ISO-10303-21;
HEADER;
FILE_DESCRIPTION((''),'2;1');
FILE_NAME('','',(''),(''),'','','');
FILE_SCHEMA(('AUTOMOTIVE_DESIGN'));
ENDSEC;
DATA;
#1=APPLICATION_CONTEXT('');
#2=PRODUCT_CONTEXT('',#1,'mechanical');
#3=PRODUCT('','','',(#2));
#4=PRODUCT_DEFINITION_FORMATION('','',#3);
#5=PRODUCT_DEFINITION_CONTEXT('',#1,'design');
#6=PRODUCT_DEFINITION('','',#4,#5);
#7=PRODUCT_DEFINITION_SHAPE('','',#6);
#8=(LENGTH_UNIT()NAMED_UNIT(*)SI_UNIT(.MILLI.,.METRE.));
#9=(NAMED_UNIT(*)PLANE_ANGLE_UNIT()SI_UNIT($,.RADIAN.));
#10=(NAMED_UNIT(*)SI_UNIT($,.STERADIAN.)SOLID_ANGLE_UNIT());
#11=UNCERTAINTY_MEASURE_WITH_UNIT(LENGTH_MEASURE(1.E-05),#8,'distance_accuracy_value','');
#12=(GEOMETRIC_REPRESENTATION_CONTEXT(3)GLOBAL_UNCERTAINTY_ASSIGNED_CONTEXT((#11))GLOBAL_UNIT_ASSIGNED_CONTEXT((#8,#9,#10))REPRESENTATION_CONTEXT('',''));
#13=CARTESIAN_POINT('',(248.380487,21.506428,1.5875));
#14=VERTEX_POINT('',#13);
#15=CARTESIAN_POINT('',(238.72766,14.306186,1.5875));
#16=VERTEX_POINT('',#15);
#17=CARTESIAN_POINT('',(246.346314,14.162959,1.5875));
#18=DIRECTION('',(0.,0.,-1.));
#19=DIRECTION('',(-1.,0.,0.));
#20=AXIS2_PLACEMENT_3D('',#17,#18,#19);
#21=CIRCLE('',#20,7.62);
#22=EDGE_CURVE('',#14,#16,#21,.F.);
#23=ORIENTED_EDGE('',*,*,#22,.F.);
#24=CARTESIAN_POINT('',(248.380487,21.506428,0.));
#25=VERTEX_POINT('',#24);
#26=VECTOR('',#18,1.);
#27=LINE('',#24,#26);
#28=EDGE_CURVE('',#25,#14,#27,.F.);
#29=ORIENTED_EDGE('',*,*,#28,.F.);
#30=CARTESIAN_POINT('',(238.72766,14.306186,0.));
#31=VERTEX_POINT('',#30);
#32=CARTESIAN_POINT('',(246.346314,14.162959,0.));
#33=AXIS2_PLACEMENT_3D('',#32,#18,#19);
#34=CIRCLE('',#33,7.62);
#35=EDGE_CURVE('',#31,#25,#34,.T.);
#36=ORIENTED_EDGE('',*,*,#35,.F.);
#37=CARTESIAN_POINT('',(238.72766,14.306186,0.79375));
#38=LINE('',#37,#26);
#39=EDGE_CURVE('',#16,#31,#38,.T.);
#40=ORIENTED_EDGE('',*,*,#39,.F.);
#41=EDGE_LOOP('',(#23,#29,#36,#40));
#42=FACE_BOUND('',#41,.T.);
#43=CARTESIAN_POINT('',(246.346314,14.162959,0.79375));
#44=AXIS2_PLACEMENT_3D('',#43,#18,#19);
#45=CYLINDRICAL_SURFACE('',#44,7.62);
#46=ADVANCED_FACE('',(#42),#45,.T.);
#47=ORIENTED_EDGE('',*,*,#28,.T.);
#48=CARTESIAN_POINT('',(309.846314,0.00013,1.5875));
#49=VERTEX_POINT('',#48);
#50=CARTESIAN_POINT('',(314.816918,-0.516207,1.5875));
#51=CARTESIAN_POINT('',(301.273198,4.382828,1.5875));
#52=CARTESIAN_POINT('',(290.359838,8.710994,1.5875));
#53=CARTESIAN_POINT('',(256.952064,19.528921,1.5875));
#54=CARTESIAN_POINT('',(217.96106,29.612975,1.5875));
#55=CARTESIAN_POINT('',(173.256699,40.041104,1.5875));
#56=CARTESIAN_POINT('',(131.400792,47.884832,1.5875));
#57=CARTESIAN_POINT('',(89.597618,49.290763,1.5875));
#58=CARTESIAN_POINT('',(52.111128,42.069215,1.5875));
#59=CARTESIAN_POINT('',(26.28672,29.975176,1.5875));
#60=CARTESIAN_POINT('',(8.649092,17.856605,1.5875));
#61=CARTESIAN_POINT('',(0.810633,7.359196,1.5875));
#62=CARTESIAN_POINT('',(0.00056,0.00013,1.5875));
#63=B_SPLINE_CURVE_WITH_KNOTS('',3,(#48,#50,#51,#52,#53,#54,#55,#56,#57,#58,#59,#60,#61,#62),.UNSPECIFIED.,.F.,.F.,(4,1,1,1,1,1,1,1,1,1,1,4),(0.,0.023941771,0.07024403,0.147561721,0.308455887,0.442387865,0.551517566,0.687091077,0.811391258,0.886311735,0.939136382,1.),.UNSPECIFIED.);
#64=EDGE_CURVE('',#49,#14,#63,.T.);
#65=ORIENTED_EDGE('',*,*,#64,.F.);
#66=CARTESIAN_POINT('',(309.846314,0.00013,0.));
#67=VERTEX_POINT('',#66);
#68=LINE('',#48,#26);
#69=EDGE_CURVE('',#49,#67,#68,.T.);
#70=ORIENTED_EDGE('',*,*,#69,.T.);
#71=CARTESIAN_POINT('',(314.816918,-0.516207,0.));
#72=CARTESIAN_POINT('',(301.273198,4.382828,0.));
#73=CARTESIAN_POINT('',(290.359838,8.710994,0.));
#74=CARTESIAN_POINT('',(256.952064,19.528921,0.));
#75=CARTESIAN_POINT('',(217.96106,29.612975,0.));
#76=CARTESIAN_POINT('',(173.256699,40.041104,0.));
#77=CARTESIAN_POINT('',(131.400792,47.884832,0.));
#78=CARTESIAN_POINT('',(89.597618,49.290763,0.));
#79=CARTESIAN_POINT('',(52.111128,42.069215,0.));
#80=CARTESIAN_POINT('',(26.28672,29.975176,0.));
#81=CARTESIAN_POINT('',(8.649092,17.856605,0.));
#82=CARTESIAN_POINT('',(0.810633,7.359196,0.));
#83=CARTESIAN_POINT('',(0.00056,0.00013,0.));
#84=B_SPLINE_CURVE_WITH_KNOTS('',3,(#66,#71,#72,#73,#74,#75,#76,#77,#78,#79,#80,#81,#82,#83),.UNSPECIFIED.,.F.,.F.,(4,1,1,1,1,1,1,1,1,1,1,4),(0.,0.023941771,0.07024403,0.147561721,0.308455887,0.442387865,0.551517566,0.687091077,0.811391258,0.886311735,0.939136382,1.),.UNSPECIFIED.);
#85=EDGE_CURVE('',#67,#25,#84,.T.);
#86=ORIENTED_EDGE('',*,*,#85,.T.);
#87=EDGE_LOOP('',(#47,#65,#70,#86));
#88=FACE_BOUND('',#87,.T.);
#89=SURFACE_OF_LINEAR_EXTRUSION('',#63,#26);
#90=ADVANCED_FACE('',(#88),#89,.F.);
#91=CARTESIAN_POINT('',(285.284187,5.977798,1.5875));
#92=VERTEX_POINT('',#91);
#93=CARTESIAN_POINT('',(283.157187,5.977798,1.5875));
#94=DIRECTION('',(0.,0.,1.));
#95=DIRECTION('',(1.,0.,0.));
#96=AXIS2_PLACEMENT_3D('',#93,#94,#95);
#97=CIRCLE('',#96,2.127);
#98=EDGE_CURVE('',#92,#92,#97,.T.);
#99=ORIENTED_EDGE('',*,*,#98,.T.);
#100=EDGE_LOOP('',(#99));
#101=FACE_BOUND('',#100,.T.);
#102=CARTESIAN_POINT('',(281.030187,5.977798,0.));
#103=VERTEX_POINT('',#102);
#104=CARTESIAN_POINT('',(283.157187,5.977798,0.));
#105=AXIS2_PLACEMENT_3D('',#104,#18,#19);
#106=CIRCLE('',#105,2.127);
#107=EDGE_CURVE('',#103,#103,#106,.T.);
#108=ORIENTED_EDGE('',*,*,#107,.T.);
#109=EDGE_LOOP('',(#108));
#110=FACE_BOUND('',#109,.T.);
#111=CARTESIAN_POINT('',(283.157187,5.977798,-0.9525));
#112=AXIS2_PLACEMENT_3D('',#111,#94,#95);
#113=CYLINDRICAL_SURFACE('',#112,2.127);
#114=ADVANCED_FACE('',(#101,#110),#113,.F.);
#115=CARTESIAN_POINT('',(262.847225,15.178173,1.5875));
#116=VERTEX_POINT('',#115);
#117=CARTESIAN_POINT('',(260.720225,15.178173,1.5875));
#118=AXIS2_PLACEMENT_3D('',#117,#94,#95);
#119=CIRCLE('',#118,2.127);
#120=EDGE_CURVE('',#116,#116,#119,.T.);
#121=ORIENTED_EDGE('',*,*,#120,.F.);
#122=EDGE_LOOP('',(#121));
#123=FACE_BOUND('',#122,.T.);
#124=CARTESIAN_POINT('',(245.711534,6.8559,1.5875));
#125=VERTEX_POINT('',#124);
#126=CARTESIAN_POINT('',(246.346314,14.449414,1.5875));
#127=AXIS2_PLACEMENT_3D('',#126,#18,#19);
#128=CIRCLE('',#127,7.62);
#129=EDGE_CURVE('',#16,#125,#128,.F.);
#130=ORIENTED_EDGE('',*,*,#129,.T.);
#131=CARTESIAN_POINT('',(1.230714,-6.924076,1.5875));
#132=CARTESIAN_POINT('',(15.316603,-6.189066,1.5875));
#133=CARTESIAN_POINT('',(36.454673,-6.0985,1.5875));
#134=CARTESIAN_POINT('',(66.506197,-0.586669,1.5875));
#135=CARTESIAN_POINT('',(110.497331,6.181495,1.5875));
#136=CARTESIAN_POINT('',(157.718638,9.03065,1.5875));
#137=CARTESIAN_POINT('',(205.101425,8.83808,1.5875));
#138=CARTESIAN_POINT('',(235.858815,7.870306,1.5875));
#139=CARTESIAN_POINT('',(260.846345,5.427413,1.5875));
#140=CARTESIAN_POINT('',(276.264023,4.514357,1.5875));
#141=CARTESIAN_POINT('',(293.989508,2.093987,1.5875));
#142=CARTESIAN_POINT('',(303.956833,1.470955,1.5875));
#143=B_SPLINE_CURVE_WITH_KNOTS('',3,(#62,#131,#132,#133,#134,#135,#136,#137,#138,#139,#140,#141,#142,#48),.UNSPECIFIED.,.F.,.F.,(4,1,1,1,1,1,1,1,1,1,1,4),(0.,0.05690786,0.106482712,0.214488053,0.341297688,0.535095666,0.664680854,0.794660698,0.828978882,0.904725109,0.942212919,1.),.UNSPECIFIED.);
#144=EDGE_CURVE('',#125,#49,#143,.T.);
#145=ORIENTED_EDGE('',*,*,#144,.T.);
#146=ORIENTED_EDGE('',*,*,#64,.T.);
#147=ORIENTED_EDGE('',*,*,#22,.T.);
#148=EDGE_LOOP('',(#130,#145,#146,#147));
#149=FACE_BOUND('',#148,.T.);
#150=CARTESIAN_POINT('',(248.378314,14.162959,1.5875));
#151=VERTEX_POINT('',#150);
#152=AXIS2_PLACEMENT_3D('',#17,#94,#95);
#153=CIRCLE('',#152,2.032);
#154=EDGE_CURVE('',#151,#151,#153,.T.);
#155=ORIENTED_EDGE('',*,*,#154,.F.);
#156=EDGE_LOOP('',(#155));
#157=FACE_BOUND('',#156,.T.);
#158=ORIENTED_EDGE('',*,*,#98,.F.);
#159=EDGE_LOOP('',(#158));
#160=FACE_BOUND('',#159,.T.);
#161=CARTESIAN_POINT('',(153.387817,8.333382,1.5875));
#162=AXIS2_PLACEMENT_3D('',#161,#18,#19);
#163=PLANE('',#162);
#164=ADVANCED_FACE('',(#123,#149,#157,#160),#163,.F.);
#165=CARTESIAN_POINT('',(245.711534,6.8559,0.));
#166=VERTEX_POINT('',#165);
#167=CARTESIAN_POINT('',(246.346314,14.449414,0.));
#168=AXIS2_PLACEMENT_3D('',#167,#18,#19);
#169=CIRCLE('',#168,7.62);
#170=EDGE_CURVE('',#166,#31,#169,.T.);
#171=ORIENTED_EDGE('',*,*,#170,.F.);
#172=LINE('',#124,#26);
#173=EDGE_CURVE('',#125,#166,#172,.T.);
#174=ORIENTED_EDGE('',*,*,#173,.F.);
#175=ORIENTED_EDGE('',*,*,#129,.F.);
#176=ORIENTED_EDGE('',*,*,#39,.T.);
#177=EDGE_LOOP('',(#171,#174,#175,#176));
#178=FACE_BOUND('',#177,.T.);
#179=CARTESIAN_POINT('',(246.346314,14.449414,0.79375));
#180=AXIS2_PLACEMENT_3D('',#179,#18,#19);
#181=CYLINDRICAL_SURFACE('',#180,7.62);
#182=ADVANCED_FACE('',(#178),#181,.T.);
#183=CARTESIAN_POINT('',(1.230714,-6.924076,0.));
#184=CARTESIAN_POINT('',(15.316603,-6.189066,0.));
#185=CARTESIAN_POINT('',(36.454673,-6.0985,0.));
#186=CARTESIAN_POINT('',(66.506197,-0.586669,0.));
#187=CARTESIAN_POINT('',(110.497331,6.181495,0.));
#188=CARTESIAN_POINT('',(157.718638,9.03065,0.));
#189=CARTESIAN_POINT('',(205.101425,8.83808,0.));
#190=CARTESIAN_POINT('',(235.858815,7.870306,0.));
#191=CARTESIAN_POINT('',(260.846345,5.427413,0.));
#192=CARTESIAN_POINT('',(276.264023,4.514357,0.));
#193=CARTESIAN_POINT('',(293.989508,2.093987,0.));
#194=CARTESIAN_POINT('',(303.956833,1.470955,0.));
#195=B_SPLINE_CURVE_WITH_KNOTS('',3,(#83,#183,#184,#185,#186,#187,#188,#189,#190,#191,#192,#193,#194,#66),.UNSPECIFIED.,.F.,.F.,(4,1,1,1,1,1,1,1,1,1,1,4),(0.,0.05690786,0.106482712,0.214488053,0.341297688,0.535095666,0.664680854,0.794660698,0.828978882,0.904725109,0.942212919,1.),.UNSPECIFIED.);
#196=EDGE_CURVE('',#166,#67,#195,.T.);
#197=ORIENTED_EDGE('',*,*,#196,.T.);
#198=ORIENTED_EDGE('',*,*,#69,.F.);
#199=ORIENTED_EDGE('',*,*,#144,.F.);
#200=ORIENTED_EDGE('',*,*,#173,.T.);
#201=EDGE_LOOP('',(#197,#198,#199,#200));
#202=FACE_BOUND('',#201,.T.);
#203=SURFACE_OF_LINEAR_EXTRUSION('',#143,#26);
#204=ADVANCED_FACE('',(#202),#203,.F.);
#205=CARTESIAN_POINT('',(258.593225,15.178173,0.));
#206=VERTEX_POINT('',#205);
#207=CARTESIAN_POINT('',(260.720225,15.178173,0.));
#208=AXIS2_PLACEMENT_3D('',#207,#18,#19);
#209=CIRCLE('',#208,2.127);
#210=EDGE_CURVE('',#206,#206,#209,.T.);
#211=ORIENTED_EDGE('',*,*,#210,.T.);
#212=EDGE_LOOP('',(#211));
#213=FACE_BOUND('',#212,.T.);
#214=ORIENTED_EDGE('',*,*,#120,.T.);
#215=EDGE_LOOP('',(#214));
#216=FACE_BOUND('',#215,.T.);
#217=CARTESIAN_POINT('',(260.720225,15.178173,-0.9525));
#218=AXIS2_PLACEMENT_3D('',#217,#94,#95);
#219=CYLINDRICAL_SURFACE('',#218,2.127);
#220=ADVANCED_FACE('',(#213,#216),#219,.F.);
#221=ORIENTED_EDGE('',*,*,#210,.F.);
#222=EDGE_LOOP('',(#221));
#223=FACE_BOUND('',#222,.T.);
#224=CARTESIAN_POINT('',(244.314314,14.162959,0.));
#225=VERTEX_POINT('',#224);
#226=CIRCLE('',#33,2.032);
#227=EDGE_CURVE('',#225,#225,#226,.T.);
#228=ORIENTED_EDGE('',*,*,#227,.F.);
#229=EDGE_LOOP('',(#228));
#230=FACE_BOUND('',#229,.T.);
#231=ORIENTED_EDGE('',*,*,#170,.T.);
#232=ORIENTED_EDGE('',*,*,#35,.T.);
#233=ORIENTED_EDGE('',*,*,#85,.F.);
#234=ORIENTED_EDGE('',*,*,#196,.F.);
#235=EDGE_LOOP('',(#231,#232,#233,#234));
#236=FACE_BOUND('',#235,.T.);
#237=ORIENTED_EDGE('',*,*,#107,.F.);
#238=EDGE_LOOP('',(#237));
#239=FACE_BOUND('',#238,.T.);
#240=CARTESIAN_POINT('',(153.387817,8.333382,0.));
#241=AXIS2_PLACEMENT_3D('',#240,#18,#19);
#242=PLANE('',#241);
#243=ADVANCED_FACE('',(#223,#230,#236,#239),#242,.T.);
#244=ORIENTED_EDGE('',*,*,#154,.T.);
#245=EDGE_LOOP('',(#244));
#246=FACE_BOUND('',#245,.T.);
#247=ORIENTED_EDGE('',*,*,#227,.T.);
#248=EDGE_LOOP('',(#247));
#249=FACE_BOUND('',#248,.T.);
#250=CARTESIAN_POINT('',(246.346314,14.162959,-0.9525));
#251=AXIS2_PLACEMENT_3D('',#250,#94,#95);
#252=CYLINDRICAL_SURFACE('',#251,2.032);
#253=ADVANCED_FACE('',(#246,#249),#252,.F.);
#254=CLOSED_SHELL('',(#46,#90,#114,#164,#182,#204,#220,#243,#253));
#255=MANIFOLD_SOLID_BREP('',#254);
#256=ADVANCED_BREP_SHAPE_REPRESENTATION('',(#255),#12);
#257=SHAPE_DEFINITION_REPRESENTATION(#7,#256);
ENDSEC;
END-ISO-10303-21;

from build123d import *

# Parameters (mm, degrees)
BOSS_EXTRUDE1_DEPTH = 1.5875
SKETCH2_R           = 6.35
SKETCH2_R_2         = 3.175
CUT_EXTRUDE1_DEPTH  = 316.731983488
SKETCH3_W           = 329.065813824
SKETCH3_H           = 177.30262506
CUT_EXTRUDE2_DEPTH  = 316.731983488
FILLET1_DEPTH       = 1.5875
SKETCH4_R           = 2.032
CUT_EXTRUDE3_DEPTH  = 2.54
SKETCH5_R           = 2.127
CUT_EXTRUDE4_DEPTH  = 2.54


with BuildPart() as part:
    # Sketch1 → Boss-Extrude1 (new body)
    with BuildSketch(Plane.XY):
        with BuildLine():
            add(Edge.make_bspline(
                [(0.000560351, 0.000130087), (0.810633127, 7.359196055), (8.649092025, 17.856605174), (26.286719818, 29.975176328), (52.111128271, 42.069215275), (89.597618475, 49.290763054), (131.400792109, 47.884831915), (173.256699242, 40.041104278), (217.961060472, 29.612974894), (256.952064401, 19.528920948), (290.35983767, 8.71099439), (301.273197721, 4.382828139), (314.816918223, -0.516206742), (309.846313895, 0.000130087)],
                knots=[0, 0, 0, 0, 0.060863618, 0.113688265, 0.188608742, 0.312908923, 0.448482434, 0.557612135, 0.691544113, 0.852438279, 0.92975597, 0.976058229, 1, 1, 1, 1], degree=3))
            add(Edge.make_bspline(
                [(309.846313895, 0.000130087), (303.956832565, 1.47095521), (293.989507544, 2.093987313), (276.26402299, 4.514356704), (260.846344817, 5.427413394), (235.858814759, 7.870306192), (205.101424636, 8.838080282), (157.718638092, 9.030650149), (110.497331172, 6.181495223), (66.506197185, -0.586669107), (36.454672816, -6.098499901), (15.316603331, -6.189065841), (1.230714189, -6.924076091), (0.000560351, 0.000130087)],
                knots=[0, 0, 0, 0, 0.057787081, 0.095274891, 0.171021118, 0.205339302, 0.335319146, 0.464904334, 0.658702312, 0.785511947, 0.893517288, 0.94309214, 1, 1, 1, 1], degree=3))
        make_face()
    extrude(amount=BOSS_EXTRUDE1_DEPTH)

    # Sketch2 → Cut-Extrude1 (cut, through all)
    with BuildSketch(Plane.XY.offset(1.5875)):
        with Locations((20.32, 10.16)):
            Circle(SKETCH2_R)
        with Locations((227.296313895, 19.050130087)):
            Circle(SKETCH2_R_2)
    extrude(amount=-CUT_EXTRUDE1_DEPTH, mode=Mode.SUBTRACT)

    # Sketch3 → Cut-Extrude2 (cut, through all)
    with BuildSketch(Plane.XY.offset(1.5875)):
        with Locations((74.193406983, 18.895182109)):
            Rectangle(SKETCH3_W, SKETCH3_H)
    extrude(amount=-CUT_EXTRUDE2_DEPTH, mode=Mode.SUBTRACT)

    # Fillet1: read off the stored shape, not the designer's step
    # Fillet1 outline → Fillet1 (cut)
    with BuildSketch(Plane.XY):
        with BuildLine():
            ThreePointArc((245.711534403, 6.855899952), (240.78695405, 9.238088014), (238.727660088, 14.306186276))
            ThreePointArc((238.727660088, 14.306186276), (241.790276652, 20.270898068), (248.380487069, 21.506427765))
            add(Edge.make_bspline(
                [(248.380487069, 21.506427765), (245.14201846, 22.403497776), (241.927955434, 23.272784833), (238.726313893, 24.121097226)],
                knots=[0.203822749, 0.203822749, 0.203822749, 0.203822749, 0.233593651, 0.233593651, 0.233593651, 0.233593651], degree=3))
            Line((238.726313893, 24.121097226), (238.726313894, 7.379528673))
            add(Edge.make_bspline(
                [(238.726313894, 7.379528673), (241.056196666, 7.224072569), (243.384717208, 7.05041014), (245.711534403, 6.855899952)],
                knots=[0.772010011, 0.772010011, 0.772010011, 0.772010011, 0.794337025, 0.794337025, 0.794337025, 0.794337025], degree=3))
        make_face()
    extrude(amount=FILLET1_DEPTH, mode=Mode.SUBTRACT)

    # Sketch4 → Cut-Extrude3 (cut)
    with BuildSketch(Plane.XY.offset(1.5875)):
        with Locations((246.346313895, 14.162958592)):
            Circle(SKETCH4_R)
    extrude(amount=-CUT_EXTRUDE3_DEPTH, mode=Mode.SUBTRACT)

    # Sketch5 → Cut-Extrude4 (cut)
    with BuildSketch(Plane.XY.offset(1.5875)):
        with Locations((260.720225155, 15.178172845)):
            Circle(SKETCH5_R)
        with Locations((283.157187456, 5.977798132)):
            Circle(SKETCH5_R)
    extrude(amount=-CUT_EXTRUDE4_DEPTH, mode=Mode.SUBTRACT)


solid = part.part
